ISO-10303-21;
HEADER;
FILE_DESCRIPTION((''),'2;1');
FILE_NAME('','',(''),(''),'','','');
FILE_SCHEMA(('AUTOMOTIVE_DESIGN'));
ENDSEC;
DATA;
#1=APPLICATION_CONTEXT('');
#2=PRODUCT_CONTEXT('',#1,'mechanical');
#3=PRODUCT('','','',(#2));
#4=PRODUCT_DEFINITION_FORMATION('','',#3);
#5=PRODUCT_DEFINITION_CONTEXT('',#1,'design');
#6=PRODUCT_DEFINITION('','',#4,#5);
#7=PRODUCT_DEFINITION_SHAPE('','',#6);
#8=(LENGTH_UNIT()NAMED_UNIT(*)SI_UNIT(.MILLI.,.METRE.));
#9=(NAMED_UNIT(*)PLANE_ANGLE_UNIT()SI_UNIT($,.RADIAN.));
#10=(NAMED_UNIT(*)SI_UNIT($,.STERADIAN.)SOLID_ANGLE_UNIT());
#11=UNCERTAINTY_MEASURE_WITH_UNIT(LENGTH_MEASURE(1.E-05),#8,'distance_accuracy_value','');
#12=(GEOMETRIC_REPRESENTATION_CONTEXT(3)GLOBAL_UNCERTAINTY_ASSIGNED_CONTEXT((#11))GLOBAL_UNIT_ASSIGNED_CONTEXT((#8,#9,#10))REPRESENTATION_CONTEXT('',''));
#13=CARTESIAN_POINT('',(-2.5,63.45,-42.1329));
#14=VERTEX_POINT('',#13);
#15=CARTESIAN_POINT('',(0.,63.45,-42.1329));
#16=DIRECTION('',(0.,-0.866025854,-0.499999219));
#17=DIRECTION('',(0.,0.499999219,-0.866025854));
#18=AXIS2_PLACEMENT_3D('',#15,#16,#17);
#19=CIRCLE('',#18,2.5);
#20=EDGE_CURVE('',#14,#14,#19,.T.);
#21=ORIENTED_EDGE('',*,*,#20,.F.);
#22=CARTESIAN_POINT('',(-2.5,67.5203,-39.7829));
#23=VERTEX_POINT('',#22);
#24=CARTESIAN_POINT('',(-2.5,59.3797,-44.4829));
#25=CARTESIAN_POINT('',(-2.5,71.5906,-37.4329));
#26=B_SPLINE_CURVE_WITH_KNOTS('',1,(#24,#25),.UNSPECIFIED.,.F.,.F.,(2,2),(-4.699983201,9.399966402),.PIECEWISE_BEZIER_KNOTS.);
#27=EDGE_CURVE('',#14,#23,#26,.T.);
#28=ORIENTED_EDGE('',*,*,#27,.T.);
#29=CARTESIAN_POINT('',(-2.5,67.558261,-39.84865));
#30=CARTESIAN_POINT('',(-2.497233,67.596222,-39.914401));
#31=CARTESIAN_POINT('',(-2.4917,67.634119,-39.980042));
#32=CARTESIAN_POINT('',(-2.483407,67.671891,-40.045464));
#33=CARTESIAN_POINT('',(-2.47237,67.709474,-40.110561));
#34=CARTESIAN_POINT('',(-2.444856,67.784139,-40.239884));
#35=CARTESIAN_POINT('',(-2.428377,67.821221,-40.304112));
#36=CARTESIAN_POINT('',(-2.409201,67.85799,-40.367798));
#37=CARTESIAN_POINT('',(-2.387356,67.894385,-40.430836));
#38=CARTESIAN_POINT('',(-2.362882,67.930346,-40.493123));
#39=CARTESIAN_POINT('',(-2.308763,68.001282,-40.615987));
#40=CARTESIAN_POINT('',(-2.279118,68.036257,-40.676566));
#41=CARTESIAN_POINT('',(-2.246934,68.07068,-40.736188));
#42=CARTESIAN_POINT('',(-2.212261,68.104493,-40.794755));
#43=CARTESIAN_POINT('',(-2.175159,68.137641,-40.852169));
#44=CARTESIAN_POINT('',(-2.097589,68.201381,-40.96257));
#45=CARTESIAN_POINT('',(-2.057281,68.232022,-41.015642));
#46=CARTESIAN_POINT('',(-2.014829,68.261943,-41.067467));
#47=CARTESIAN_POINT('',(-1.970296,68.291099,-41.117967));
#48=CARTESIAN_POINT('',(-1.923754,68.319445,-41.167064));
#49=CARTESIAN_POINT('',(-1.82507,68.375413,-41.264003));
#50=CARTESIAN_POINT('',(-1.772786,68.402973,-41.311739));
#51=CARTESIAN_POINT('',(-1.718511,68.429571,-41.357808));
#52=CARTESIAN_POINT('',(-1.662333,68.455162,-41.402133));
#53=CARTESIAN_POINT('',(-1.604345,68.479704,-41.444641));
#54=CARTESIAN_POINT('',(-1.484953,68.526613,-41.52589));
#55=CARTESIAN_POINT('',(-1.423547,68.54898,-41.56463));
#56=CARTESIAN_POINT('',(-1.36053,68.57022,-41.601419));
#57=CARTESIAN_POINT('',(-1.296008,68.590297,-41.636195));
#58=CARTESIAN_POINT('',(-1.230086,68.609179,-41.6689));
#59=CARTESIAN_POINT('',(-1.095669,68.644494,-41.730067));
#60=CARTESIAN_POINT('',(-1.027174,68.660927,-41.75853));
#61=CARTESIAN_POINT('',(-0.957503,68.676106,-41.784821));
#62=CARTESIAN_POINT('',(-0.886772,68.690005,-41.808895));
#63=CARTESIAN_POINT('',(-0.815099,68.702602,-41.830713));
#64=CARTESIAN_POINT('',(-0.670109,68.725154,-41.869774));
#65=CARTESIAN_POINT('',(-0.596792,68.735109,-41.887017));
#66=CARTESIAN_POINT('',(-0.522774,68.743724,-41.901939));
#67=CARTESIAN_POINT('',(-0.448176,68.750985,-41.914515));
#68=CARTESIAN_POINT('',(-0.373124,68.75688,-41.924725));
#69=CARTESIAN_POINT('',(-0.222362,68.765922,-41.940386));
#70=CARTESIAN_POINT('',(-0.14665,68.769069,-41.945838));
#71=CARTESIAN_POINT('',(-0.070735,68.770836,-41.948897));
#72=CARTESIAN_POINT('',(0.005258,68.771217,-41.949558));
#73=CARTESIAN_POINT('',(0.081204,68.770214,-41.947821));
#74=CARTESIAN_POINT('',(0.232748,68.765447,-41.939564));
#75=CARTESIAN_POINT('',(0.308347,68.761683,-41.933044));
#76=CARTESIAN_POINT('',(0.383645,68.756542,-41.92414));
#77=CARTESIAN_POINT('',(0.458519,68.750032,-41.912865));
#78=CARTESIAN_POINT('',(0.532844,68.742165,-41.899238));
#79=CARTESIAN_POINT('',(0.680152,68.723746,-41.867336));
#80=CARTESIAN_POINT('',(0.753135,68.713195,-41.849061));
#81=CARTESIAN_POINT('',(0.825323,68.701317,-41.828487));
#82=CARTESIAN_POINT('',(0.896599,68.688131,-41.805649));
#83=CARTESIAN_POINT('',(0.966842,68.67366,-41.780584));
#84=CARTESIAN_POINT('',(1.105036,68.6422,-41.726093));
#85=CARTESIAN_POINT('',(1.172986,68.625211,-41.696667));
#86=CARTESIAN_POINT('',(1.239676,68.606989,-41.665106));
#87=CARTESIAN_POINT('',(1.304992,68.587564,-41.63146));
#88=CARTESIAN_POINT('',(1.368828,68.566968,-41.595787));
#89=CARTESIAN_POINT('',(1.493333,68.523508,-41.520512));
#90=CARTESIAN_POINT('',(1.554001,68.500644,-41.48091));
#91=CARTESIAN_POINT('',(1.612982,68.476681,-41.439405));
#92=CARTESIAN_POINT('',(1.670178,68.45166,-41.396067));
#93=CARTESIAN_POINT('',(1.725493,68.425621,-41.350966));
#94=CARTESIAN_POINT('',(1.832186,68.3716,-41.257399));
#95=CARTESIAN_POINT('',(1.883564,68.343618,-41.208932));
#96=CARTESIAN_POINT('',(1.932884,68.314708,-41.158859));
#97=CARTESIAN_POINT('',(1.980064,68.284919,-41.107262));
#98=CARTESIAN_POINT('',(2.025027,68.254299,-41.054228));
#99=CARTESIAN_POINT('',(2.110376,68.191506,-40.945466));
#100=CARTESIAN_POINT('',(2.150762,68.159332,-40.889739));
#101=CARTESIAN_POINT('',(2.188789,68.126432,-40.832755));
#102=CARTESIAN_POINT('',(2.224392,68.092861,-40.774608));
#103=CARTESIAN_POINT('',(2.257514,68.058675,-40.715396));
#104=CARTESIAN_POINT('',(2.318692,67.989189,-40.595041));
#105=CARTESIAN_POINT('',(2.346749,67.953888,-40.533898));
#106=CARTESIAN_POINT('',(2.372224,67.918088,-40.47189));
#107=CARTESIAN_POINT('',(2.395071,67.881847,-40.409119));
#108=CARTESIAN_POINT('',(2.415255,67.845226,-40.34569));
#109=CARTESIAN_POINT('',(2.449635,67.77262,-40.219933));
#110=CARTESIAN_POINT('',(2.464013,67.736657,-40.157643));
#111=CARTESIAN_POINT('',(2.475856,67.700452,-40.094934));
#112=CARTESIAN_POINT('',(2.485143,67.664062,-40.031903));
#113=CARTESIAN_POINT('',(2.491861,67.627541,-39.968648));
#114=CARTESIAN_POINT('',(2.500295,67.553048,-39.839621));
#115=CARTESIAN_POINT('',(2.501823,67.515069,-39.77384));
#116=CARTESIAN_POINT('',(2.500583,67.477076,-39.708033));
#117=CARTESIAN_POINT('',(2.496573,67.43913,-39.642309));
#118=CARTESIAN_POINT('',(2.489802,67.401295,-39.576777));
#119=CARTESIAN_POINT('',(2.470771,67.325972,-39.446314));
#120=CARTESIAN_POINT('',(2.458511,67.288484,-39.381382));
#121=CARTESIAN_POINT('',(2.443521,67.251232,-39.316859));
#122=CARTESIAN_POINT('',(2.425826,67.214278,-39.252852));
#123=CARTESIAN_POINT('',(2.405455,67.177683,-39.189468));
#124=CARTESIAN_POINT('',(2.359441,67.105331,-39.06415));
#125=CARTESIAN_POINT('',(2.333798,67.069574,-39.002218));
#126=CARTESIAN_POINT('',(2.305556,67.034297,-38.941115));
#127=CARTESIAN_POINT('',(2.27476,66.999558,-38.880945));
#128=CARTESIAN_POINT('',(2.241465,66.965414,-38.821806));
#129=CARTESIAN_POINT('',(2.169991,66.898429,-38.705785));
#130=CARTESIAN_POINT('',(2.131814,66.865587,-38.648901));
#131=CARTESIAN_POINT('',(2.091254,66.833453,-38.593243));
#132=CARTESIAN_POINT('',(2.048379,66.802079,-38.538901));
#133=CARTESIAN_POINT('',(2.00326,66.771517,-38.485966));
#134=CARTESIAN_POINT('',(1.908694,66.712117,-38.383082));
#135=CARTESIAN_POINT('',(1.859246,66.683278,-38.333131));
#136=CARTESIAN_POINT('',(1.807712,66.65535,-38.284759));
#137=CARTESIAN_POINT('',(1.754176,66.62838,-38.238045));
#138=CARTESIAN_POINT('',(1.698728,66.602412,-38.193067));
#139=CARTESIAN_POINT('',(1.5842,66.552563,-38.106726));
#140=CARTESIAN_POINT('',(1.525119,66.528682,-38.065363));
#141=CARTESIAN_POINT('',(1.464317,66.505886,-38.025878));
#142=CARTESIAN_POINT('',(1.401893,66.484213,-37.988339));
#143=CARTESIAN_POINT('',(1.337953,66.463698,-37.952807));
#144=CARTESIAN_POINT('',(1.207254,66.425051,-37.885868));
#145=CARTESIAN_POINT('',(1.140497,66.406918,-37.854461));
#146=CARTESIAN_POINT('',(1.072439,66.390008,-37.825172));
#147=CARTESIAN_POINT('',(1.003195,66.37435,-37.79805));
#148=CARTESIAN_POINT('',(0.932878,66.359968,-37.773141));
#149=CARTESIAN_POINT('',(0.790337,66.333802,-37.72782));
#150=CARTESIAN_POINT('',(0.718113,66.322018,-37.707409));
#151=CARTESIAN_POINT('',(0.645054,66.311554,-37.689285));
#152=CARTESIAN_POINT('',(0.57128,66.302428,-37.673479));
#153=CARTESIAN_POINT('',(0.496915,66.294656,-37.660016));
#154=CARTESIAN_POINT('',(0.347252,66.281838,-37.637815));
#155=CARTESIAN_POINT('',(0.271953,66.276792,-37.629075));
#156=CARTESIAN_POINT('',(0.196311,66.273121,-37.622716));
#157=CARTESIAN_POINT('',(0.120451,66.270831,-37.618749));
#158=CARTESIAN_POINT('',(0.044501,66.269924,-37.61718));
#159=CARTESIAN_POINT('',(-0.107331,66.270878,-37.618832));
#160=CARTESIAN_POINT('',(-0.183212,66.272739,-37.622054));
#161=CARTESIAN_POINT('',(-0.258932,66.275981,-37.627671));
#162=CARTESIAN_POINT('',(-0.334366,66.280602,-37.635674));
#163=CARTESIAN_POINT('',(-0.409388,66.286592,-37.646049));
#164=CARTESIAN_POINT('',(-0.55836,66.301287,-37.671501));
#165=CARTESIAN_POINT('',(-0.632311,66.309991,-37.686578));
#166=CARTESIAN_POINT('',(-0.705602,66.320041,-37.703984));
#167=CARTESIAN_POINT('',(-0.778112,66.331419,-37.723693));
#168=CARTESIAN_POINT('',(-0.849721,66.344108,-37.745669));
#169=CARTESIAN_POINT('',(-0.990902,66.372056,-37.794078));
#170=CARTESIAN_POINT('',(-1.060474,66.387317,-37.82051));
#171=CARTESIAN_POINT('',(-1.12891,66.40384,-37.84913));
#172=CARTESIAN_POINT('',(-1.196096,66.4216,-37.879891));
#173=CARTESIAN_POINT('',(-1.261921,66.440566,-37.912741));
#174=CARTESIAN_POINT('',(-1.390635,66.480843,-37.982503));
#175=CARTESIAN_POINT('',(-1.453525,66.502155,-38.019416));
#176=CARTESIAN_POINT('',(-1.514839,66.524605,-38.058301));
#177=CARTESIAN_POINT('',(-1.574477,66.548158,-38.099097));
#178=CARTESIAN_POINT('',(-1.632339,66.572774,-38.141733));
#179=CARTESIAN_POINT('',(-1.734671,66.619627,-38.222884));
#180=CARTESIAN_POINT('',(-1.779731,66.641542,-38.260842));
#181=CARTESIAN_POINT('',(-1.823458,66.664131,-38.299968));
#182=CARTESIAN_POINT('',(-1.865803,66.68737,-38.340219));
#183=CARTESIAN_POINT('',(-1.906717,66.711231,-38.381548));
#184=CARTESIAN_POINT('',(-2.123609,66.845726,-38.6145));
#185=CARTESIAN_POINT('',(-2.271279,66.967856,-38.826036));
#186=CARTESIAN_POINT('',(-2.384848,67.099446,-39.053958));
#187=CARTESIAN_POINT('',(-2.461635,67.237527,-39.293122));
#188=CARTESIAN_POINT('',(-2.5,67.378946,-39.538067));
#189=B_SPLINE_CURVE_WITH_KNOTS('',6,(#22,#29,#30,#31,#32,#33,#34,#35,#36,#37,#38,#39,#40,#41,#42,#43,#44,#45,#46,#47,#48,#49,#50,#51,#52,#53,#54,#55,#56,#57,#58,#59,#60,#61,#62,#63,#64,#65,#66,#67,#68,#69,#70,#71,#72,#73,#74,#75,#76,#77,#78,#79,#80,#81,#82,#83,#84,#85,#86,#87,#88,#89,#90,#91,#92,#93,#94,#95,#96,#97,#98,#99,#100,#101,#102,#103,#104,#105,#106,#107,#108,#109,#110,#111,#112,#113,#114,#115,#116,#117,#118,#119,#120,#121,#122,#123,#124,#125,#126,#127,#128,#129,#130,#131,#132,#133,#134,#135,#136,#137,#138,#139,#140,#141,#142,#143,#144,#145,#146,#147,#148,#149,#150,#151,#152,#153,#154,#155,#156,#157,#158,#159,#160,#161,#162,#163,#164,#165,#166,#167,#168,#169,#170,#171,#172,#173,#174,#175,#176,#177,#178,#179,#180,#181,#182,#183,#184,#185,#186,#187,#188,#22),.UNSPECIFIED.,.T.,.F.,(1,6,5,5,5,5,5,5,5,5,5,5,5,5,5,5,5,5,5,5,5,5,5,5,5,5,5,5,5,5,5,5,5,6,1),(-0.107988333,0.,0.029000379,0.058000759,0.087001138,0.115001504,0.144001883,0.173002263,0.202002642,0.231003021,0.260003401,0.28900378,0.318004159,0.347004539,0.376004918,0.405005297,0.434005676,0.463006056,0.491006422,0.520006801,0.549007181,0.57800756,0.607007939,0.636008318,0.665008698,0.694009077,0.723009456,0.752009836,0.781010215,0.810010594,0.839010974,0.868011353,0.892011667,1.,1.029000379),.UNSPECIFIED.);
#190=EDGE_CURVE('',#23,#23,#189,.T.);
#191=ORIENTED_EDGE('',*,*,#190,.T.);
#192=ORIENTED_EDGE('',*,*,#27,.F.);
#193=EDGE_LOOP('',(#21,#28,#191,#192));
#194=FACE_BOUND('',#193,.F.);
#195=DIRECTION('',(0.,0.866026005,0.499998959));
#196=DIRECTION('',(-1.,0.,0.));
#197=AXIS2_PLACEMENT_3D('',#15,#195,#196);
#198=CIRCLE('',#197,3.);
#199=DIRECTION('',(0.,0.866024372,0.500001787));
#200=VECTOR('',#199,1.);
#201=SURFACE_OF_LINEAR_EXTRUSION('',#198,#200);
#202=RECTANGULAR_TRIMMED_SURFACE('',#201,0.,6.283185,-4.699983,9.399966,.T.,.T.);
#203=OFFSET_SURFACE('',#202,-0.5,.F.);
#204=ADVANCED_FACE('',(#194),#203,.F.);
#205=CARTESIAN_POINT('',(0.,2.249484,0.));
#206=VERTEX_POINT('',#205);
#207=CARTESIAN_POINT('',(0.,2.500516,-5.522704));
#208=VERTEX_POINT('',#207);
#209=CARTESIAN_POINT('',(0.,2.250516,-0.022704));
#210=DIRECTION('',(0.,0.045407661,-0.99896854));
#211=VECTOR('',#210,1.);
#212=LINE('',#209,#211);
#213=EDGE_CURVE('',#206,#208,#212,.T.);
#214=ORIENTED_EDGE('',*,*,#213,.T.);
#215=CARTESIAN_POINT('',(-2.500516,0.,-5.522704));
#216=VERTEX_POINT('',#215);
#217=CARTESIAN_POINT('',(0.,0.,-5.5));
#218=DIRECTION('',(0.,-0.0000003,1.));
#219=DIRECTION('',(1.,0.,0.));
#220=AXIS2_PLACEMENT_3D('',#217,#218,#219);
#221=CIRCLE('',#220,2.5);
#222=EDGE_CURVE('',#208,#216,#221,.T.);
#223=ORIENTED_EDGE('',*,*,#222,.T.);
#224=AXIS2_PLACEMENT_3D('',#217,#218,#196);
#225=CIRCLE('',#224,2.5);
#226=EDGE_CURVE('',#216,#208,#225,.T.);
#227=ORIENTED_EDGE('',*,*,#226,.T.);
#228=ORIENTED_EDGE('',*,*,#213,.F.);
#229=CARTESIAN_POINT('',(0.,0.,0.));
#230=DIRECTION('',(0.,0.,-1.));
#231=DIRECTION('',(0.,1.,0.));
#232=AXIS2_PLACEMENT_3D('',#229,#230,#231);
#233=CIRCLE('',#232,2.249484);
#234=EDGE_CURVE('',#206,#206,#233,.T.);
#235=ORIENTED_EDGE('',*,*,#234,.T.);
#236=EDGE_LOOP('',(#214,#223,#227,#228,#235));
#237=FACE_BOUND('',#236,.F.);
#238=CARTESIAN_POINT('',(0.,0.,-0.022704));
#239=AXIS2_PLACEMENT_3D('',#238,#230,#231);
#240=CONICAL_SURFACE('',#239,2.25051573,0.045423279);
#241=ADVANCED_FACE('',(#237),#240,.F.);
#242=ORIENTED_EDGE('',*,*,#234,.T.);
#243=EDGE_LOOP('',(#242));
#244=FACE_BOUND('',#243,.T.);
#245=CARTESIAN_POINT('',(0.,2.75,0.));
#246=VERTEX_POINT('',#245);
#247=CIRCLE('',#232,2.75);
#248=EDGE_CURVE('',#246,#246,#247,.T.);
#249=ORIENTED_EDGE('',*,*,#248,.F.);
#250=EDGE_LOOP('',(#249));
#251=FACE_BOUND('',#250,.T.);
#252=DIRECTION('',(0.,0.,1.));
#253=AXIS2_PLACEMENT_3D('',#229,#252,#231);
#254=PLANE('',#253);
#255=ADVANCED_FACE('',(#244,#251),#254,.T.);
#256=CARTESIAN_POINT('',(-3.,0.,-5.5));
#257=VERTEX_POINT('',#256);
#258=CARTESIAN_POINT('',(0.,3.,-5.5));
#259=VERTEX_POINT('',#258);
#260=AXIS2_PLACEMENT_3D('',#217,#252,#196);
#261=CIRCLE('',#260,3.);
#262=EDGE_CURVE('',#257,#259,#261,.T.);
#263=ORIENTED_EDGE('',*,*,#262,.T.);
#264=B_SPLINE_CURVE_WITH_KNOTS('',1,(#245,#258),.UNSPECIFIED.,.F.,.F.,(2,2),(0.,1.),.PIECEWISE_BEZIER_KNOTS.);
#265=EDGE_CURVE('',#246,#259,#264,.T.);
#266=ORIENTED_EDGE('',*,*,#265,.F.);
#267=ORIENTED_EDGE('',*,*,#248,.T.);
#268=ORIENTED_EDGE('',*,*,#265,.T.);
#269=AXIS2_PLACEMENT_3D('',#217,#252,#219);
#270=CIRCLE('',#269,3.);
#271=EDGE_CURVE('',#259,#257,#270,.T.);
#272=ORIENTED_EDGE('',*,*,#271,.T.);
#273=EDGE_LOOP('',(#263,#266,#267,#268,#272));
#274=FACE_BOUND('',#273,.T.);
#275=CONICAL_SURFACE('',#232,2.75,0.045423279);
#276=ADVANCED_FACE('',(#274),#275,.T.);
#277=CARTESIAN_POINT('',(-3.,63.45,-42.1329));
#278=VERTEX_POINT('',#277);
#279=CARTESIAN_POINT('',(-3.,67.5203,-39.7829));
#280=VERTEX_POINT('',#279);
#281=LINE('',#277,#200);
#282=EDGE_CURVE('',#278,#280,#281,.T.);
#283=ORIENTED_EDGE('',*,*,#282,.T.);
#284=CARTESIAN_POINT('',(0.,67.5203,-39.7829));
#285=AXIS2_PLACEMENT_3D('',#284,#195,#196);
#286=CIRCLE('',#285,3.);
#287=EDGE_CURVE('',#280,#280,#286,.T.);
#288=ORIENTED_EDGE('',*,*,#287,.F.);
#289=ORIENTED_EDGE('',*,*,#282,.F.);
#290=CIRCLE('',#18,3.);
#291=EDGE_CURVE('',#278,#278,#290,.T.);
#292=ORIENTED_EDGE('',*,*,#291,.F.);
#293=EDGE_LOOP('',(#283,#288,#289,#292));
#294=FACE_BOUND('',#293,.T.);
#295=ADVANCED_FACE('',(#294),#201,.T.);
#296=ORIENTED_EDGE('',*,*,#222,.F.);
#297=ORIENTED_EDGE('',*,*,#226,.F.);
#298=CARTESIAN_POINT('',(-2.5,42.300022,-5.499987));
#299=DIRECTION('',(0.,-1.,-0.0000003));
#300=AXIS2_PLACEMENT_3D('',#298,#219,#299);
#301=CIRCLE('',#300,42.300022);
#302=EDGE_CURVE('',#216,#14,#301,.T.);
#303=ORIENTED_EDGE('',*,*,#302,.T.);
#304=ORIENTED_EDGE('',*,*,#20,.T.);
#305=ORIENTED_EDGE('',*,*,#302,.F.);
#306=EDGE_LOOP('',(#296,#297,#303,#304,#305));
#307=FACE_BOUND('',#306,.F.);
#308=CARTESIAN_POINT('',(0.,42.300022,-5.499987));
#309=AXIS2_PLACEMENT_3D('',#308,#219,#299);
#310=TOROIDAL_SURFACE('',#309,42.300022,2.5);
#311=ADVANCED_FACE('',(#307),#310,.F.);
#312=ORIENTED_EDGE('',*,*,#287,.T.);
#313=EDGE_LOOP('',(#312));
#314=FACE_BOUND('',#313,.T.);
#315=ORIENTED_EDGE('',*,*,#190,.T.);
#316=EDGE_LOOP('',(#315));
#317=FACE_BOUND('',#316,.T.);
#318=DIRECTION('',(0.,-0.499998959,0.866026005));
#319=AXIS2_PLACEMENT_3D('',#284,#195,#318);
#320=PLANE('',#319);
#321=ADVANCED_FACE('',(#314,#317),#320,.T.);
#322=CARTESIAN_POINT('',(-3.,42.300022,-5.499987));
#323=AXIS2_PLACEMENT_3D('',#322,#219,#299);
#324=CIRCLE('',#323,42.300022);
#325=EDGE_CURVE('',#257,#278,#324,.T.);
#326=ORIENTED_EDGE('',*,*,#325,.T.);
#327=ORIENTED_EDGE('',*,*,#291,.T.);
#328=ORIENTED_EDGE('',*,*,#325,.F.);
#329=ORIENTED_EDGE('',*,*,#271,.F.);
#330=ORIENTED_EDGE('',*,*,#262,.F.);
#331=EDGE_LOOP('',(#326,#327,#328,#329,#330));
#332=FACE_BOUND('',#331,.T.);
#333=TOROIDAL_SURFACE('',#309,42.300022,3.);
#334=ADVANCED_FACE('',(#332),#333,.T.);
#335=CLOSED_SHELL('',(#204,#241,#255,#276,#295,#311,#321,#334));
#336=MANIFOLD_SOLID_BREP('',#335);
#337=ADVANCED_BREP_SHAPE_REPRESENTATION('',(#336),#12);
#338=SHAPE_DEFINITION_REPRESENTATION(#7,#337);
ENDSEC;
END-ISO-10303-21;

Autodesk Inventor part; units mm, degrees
ref_plane "YZ Plane" through (0, 0, 0) normal (1, 0, 0) x (0, 1, 0)
sketch "Skizze1" plane through (0, 0, 0) normal (0, 0, 1) x (0, 1, 0)
  circle A0 centre (0, 0) radius 2.75
  dimension "d0" = 5.5
sketch "Skizze2" plane through (0, 0, 0) normal (1, 0, 0) x (0, 1, 0)
  arc A0 (0, -5.5) -> (63.45, -42.1329) centre (42.3, -5.5) ccw
  line L0 (63.45, -42.1329) -> (67.5203, -39.7829)
  line L1 (42.3, -5.5) -> (42.3, -47.8) construction
  point P0 (0, 0)
  point P1 (0, 0)
  dimension "d3" = 5.5
  dimension "d4" = 42.3
  dimension "d5" = 4.7
  dimension "d27" = 60
ref_plane "Arbeitsebene1" through (0, 0, -5.5) normal (0, 0, 1) x (1, 0, 0)
sketch "Skizze3" plane through (0, 0, -5.5) normal (0, 0, 1) x (1, 0, 0)
  circle A0 centre (0, 0) radius 3
  dimension "d11" = 6
ref_plane "Arbeitsebene2" through (0, 0, -5.5) normal (0, 0, -1) x (-1, 0, 0)
sketch "Skizze4" plane through (0, 0, -5.5) normal (0, 0, -1) x (-1, 0, 0)
  circle A0 centre (0, 0) radius 3 projected
loft "Erhebung2" add profiles "Skizze1", "Skizze3"
sweep "Sweeping3" add profiles "Skizze4" path "Skizze2"
shell "Wandung2" thickness 0.5 removed faces 2 at (-0.6079, 0.6861, 0) at (-0.7485, 67.8519, -40.3572)
properties part number "Tube" material "Kupfer"
